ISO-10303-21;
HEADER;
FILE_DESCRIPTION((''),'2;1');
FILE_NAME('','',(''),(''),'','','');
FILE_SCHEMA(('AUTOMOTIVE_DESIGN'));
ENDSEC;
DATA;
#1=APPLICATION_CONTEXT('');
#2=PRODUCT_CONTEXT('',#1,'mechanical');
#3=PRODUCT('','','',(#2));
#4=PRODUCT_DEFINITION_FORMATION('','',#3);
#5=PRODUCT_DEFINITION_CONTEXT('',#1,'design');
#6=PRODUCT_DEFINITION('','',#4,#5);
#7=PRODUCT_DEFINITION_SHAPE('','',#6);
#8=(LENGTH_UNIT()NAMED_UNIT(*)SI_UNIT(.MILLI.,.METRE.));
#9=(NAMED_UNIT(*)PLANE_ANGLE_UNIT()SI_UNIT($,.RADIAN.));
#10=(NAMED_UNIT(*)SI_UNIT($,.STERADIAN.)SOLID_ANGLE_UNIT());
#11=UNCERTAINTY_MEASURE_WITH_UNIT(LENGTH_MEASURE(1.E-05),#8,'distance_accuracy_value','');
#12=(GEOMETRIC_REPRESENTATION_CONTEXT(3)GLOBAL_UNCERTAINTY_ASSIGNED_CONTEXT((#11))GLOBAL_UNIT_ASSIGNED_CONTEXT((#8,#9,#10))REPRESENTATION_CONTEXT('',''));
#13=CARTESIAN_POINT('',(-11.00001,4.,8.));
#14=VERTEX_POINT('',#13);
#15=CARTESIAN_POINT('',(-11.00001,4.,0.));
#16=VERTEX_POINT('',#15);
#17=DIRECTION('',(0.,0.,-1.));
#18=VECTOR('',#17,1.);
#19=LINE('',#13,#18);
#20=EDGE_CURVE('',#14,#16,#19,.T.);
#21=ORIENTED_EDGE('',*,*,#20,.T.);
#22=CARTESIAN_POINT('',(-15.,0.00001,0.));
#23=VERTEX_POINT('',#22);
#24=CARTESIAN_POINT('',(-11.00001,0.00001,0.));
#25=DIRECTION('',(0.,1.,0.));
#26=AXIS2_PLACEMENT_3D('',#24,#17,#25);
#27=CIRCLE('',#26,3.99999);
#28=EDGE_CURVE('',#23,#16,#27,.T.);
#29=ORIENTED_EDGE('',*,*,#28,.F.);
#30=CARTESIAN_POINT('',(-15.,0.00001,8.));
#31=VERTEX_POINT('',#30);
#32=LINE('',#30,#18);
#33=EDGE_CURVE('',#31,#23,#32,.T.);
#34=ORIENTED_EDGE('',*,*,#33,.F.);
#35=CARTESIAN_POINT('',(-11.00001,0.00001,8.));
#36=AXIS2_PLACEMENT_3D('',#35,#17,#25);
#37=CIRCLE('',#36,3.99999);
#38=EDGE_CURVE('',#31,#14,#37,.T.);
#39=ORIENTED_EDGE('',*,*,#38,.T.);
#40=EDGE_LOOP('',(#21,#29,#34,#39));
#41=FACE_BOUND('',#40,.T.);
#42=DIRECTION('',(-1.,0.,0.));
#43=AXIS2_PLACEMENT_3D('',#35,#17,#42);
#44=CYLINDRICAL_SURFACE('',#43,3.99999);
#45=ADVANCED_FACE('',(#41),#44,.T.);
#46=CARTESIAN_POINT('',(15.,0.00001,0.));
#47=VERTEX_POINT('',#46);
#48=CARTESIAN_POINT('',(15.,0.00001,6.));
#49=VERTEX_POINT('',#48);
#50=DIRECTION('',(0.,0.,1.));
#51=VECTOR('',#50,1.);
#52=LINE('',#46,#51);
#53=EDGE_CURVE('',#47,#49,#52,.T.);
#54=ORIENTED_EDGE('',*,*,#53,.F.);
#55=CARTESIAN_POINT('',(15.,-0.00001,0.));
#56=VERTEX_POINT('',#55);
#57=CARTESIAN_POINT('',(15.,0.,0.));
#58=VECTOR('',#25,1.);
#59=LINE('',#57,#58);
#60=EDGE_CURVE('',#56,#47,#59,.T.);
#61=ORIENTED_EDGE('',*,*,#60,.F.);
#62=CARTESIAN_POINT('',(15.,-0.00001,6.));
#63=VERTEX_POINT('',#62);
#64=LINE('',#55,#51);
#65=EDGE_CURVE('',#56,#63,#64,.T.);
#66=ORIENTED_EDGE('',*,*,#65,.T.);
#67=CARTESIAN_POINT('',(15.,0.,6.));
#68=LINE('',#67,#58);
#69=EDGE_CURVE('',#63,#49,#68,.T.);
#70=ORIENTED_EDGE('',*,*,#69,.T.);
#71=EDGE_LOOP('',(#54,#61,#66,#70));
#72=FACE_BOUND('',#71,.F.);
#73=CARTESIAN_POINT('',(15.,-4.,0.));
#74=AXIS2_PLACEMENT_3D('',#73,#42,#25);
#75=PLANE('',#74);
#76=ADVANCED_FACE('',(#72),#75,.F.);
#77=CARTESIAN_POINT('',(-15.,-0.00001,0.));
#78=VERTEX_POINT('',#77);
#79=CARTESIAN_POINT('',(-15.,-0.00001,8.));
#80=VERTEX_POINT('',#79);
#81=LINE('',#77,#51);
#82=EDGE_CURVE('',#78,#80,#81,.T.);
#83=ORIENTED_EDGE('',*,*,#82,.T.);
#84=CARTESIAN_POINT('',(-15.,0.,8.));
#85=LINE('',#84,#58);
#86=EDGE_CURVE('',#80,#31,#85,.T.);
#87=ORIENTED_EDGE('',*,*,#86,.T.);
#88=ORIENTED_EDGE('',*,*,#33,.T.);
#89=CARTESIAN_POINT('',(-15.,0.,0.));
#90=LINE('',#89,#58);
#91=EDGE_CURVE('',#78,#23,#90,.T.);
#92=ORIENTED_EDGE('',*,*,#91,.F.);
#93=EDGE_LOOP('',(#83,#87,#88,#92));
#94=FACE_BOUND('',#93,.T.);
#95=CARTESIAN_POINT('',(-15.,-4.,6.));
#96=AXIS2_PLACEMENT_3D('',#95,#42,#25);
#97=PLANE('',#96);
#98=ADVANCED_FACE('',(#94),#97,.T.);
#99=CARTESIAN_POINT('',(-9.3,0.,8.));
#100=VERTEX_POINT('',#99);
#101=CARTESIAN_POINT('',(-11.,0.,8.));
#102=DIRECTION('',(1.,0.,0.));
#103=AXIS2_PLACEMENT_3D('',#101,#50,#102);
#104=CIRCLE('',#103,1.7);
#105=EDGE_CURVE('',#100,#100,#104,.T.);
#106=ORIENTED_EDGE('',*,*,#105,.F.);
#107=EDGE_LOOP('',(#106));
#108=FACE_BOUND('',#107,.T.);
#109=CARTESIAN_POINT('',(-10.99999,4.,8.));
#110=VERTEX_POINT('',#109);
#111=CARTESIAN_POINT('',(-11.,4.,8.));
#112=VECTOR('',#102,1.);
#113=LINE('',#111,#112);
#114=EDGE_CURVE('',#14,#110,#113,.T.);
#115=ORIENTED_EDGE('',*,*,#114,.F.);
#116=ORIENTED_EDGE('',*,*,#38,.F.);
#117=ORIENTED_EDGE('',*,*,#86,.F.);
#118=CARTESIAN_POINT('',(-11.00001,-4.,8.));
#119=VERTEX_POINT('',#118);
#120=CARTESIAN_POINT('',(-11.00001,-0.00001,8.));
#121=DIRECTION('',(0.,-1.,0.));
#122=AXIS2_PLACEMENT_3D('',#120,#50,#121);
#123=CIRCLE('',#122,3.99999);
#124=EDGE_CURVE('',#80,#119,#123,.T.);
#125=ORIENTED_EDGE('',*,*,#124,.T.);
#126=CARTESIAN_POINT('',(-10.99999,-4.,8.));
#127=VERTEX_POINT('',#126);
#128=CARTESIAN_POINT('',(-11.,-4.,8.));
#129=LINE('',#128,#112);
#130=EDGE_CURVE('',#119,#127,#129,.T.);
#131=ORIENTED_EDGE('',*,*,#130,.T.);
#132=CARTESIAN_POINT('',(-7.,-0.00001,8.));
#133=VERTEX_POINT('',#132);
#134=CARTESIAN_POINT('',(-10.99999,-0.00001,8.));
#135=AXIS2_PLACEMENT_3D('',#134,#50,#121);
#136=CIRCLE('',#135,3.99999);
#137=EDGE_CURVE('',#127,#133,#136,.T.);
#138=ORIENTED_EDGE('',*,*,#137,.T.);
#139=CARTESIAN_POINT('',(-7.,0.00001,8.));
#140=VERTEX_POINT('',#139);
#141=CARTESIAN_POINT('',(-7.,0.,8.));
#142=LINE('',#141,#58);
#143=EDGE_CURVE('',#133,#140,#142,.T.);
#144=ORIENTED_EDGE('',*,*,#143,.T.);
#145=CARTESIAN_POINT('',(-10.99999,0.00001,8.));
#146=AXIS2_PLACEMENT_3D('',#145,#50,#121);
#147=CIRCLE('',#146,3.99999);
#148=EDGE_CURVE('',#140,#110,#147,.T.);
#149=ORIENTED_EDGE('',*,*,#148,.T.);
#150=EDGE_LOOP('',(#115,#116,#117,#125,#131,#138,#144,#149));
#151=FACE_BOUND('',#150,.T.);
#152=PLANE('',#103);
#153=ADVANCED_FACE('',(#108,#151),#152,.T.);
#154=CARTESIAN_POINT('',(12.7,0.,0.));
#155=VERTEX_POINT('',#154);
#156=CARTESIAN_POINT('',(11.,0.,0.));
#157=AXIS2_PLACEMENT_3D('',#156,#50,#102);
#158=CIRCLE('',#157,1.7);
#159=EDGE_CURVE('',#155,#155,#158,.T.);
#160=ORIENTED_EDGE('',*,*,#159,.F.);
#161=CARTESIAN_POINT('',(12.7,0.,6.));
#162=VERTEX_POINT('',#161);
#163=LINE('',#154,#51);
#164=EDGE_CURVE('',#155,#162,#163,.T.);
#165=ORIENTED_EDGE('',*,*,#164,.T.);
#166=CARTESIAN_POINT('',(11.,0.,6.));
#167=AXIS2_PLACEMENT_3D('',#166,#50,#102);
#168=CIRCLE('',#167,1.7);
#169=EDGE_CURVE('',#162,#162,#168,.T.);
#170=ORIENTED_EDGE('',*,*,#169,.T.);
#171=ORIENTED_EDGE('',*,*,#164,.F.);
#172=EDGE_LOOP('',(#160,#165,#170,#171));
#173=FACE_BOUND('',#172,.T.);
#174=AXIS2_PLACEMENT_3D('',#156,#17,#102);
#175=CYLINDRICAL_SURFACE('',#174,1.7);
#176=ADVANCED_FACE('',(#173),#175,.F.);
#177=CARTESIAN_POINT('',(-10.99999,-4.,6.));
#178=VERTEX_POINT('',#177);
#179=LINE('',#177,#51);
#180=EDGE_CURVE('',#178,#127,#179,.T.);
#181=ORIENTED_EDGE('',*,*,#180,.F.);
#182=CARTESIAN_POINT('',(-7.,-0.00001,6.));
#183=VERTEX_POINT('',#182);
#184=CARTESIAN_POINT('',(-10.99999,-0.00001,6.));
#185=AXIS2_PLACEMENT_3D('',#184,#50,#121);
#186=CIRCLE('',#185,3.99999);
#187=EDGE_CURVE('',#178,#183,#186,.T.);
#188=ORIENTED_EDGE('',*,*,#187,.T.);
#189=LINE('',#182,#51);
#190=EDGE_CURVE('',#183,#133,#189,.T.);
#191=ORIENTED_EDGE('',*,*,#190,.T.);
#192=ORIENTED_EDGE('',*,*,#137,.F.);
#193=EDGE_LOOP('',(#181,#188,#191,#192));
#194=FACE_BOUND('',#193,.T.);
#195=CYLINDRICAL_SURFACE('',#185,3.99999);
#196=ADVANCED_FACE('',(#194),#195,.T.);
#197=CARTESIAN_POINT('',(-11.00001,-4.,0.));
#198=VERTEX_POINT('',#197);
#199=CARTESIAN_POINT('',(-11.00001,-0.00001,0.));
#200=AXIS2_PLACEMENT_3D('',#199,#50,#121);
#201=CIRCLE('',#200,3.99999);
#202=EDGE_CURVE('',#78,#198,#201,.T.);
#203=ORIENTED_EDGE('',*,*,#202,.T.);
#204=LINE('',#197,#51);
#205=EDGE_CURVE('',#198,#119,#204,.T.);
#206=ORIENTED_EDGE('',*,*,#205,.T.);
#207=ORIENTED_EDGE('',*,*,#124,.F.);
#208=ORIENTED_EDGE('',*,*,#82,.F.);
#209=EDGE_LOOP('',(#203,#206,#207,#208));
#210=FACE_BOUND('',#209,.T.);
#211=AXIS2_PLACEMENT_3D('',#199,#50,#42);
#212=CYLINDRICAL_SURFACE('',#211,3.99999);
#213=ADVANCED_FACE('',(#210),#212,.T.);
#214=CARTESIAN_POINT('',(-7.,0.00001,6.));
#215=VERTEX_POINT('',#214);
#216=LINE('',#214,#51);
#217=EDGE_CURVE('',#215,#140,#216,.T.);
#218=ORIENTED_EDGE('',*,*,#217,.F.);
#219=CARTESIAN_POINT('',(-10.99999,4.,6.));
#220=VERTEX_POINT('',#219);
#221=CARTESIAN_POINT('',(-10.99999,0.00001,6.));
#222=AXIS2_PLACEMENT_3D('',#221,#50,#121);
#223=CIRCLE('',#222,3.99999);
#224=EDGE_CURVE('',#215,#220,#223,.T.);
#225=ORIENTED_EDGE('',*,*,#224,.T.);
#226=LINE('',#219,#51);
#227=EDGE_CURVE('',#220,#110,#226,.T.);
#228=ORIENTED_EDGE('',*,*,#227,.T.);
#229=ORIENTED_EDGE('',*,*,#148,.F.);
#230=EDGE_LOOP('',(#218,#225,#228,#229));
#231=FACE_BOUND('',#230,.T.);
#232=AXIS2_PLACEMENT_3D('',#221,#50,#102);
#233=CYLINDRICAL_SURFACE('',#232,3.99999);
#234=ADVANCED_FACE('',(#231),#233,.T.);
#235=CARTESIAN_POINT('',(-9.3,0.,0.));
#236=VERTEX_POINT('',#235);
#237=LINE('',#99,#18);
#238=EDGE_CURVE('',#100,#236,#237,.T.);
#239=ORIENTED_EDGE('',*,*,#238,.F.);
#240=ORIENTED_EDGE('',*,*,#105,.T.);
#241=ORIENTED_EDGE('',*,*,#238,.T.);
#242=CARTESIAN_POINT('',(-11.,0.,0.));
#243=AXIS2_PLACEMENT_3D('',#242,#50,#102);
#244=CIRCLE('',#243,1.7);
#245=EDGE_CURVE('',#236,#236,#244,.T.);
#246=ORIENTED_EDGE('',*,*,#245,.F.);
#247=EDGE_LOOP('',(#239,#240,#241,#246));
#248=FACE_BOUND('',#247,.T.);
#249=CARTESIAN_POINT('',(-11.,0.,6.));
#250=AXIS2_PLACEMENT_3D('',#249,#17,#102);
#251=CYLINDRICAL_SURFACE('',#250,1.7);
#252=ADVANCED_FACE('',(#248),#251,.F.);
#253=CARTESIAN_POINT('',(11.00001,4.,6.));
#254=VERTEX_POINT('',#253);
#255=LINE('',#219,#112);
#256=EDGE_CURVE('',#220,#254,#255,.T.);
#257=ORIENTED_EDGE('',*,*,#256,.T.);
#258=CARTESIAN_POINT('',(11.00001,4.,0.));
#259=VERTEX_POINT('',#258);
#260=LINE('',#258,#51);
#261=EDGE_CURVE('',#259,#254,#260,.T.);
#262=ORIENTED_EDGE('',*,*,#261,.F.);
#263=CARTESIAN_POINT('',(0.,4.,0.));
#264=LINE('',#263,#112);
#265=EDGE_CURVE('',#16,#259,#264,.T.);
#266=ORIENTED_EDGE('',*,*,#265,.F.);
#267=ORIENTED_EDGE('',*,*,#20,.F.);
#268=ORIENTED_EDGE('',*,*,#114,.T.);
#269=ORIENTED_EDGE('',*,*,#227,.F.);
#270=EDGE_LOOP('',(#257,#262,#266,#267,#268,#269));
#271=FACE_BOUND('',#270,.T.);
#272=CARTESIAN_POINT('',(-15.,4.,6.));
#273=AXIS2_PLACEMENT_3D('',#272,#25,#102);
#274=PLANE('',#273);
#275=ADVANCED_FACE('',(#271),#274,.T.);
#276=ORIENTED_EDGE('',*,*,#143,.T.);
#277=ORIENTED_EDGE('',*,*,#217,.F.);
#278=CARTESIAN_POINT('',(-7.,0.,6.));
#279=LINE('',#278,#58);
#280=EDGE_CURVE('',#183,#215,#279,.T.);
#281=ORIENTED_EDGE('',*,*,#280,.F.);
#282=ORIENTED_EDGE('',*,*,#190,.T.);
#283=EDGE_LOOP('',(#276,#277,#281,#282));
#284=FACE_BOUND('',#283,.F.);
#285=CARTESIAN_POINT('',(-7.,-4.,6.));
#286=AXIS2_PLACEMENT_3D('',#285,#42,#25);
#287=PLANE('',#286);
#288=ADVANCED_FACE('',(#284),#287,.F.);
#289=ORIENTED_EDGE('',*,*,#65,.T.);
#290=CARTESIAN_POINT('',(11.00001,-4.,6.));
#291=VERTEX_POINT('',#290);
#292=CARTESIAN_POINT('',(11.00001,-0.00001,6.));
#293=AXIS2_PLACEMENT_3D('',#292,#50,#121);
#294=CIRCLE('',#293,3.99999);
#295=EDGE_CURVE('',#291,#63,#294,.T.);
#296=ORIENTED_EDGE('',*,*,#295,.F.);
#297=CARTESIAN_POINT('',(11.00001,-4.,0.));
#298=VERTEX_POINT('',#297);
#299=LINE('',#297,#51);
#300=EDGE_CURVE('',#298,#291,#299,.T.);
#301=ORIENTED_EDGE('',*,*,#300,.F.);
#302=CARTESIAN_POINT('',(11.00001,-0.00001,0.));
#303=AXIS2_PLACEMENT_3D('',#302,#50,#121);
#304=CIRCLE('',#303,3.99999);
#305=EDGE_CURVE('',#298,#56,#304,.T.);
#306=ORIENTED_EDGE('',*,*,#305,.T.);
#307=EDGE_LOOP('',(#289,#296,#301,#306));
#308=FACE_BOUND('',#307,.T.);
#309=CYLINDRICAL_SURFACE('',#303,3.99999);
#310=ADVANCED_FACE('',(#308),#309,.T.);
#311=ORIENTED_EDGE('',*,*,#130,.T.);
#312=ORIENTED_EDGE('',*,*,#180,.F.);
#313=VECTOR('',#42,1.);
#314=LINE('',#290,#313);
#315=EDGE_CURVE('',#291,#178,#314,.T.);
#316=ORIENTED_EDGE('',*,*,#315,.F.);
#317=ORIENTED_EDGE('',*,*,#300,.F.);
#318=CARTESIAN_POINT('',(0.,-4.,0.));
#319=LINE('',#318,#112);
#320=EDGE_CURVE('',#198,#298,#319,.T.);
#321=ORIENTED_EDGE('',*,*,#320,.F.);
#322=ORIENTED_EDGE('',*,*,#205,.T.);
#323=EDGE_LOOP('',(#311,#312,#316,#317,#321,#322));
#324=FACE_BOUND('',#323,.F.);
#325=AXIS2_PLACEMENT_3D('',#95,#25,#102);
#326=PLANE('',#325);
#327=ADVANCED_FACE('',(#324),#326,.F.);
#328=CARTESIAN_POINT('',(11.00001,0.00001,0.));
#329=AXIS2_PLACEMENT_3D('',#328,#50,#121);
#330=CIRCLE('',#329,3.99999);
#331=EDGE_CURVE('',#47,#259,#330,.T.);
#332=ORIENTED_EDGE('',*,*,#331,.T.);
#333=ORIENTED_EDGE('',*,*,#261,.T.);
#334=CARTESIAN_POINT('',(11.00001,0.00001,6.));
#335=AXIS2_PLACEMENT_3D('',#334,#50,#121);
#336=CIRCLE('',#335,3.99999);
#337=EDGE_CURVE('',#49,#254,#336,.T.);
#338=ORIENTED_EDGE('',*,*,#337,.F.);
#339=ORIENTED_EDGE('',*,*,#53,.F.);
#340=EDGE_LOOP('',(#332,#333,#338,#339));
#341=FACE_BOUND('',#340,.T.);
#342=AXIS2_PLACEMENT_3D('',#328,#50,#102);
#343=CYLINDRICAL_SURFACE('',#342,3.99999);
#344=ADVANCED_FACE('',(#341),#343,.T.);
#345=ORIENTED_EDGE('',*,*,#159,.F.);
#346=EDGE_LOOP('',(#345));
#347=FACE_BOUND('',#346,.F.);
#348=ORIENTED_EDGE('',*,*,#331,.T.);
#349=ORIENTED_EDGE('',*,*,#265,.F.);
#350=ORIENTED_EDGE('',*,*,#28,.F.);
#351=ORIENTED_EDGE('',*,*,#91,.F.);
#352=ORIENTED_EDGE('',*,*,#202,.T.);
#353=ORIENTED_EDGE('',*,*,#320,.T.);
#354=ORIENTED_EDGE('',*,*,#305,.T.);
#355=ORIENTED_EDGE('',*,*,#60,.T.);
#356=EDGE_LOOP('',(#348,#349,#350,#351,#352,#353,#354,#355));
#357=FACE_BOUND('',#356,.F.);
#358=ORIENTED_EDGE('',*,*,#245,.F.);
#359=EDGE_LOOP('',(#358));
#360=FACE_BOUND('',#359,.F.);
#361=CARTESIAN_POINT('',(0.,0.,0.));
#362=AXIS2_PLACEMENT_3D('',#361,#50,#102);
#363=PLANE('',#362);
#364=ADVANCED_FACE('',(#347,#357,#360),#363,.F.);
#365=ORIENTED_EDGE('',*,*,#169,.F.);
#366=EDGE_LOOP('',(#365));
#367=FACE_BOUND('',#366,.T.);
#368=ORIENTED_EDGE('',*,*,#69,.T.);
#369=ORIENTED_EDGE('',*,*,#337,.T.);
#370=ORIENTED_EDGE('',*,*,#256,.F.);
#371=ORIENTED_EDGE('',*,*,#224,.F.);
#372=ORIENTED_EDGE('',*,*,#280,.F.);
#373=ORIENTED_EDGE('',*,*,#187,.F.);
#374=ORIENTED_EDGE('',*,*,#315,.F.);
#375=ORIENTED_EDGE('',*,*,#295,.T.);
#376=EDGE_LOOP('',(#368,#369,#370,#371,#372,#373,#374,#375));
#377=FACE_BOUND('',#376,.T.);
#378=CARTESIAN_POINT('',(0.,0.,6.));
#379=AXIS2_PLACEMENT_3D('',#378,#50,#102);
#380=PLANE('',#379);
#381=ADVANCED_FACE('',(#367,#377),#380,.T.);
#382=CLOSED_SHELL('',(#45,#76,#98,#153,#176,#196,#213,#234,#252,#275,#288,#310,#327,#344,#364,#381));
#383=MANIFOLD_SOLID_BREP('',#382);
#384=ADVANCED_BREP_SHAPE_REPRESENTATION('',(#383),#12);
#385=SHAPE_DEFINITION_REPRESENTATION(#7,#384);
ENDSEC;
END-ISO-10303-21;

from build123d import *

# Parameters (mm, degrees)
F0_W     = 30
F0_H     = 8
F0_R     = 1.7
F1_DEPTH = 6
F2_W     = 8
F2_H     = 8
F2_R     = 1.7
F3_DEPTH = 2
F4_R     = 3.99999


# Not quite as in the source:
# - a fillet or chamfer is up to 0.001 mm smaller than in the source, because OpenCascade refuses the exact size


with BuildPart() as f1:
    # F0 (on Top) → F1 (new body)
    with BuildSketch(Plane.XY):
        Rectangle(F0_W, F0_H)
        with Locations((-11, 0)):
            Circle(F0_R, mode=Mode.SUBTRACT)
        with Locations((11, 0)):
            Circle(F0_R, mode=Mode.SUBTRACT)
    extrude(amount=F1_DEPTH)

    # F2 (on face) → F3 (join)
    with BuildSketch(Plane.XY.offset(6)):
        with Locations((-11, 0)):
            Rectangle(F2_W, F2_H)
        with Locations((-11, 0)):
            Circle(F2_R, mode=Mode.SUBTRACT)
    extrude(amount=F3_DEPTH)

    # F4 (radius 4 in the source; OpenCascade refuses exactly that, so slightly less here)
    f4_edges = [f1.edges().sort_by_distance(p)[0] for p in [
        (-15, 4, 4),
        (-15, -4, 4),
        (15, 4, 3),
        (15, -4, 3),
        (-7, -4, 7),
        (-7, 4, 7),
    ]]
    fillet(f4_edges, radius=F4_R)


solid = f1.part
